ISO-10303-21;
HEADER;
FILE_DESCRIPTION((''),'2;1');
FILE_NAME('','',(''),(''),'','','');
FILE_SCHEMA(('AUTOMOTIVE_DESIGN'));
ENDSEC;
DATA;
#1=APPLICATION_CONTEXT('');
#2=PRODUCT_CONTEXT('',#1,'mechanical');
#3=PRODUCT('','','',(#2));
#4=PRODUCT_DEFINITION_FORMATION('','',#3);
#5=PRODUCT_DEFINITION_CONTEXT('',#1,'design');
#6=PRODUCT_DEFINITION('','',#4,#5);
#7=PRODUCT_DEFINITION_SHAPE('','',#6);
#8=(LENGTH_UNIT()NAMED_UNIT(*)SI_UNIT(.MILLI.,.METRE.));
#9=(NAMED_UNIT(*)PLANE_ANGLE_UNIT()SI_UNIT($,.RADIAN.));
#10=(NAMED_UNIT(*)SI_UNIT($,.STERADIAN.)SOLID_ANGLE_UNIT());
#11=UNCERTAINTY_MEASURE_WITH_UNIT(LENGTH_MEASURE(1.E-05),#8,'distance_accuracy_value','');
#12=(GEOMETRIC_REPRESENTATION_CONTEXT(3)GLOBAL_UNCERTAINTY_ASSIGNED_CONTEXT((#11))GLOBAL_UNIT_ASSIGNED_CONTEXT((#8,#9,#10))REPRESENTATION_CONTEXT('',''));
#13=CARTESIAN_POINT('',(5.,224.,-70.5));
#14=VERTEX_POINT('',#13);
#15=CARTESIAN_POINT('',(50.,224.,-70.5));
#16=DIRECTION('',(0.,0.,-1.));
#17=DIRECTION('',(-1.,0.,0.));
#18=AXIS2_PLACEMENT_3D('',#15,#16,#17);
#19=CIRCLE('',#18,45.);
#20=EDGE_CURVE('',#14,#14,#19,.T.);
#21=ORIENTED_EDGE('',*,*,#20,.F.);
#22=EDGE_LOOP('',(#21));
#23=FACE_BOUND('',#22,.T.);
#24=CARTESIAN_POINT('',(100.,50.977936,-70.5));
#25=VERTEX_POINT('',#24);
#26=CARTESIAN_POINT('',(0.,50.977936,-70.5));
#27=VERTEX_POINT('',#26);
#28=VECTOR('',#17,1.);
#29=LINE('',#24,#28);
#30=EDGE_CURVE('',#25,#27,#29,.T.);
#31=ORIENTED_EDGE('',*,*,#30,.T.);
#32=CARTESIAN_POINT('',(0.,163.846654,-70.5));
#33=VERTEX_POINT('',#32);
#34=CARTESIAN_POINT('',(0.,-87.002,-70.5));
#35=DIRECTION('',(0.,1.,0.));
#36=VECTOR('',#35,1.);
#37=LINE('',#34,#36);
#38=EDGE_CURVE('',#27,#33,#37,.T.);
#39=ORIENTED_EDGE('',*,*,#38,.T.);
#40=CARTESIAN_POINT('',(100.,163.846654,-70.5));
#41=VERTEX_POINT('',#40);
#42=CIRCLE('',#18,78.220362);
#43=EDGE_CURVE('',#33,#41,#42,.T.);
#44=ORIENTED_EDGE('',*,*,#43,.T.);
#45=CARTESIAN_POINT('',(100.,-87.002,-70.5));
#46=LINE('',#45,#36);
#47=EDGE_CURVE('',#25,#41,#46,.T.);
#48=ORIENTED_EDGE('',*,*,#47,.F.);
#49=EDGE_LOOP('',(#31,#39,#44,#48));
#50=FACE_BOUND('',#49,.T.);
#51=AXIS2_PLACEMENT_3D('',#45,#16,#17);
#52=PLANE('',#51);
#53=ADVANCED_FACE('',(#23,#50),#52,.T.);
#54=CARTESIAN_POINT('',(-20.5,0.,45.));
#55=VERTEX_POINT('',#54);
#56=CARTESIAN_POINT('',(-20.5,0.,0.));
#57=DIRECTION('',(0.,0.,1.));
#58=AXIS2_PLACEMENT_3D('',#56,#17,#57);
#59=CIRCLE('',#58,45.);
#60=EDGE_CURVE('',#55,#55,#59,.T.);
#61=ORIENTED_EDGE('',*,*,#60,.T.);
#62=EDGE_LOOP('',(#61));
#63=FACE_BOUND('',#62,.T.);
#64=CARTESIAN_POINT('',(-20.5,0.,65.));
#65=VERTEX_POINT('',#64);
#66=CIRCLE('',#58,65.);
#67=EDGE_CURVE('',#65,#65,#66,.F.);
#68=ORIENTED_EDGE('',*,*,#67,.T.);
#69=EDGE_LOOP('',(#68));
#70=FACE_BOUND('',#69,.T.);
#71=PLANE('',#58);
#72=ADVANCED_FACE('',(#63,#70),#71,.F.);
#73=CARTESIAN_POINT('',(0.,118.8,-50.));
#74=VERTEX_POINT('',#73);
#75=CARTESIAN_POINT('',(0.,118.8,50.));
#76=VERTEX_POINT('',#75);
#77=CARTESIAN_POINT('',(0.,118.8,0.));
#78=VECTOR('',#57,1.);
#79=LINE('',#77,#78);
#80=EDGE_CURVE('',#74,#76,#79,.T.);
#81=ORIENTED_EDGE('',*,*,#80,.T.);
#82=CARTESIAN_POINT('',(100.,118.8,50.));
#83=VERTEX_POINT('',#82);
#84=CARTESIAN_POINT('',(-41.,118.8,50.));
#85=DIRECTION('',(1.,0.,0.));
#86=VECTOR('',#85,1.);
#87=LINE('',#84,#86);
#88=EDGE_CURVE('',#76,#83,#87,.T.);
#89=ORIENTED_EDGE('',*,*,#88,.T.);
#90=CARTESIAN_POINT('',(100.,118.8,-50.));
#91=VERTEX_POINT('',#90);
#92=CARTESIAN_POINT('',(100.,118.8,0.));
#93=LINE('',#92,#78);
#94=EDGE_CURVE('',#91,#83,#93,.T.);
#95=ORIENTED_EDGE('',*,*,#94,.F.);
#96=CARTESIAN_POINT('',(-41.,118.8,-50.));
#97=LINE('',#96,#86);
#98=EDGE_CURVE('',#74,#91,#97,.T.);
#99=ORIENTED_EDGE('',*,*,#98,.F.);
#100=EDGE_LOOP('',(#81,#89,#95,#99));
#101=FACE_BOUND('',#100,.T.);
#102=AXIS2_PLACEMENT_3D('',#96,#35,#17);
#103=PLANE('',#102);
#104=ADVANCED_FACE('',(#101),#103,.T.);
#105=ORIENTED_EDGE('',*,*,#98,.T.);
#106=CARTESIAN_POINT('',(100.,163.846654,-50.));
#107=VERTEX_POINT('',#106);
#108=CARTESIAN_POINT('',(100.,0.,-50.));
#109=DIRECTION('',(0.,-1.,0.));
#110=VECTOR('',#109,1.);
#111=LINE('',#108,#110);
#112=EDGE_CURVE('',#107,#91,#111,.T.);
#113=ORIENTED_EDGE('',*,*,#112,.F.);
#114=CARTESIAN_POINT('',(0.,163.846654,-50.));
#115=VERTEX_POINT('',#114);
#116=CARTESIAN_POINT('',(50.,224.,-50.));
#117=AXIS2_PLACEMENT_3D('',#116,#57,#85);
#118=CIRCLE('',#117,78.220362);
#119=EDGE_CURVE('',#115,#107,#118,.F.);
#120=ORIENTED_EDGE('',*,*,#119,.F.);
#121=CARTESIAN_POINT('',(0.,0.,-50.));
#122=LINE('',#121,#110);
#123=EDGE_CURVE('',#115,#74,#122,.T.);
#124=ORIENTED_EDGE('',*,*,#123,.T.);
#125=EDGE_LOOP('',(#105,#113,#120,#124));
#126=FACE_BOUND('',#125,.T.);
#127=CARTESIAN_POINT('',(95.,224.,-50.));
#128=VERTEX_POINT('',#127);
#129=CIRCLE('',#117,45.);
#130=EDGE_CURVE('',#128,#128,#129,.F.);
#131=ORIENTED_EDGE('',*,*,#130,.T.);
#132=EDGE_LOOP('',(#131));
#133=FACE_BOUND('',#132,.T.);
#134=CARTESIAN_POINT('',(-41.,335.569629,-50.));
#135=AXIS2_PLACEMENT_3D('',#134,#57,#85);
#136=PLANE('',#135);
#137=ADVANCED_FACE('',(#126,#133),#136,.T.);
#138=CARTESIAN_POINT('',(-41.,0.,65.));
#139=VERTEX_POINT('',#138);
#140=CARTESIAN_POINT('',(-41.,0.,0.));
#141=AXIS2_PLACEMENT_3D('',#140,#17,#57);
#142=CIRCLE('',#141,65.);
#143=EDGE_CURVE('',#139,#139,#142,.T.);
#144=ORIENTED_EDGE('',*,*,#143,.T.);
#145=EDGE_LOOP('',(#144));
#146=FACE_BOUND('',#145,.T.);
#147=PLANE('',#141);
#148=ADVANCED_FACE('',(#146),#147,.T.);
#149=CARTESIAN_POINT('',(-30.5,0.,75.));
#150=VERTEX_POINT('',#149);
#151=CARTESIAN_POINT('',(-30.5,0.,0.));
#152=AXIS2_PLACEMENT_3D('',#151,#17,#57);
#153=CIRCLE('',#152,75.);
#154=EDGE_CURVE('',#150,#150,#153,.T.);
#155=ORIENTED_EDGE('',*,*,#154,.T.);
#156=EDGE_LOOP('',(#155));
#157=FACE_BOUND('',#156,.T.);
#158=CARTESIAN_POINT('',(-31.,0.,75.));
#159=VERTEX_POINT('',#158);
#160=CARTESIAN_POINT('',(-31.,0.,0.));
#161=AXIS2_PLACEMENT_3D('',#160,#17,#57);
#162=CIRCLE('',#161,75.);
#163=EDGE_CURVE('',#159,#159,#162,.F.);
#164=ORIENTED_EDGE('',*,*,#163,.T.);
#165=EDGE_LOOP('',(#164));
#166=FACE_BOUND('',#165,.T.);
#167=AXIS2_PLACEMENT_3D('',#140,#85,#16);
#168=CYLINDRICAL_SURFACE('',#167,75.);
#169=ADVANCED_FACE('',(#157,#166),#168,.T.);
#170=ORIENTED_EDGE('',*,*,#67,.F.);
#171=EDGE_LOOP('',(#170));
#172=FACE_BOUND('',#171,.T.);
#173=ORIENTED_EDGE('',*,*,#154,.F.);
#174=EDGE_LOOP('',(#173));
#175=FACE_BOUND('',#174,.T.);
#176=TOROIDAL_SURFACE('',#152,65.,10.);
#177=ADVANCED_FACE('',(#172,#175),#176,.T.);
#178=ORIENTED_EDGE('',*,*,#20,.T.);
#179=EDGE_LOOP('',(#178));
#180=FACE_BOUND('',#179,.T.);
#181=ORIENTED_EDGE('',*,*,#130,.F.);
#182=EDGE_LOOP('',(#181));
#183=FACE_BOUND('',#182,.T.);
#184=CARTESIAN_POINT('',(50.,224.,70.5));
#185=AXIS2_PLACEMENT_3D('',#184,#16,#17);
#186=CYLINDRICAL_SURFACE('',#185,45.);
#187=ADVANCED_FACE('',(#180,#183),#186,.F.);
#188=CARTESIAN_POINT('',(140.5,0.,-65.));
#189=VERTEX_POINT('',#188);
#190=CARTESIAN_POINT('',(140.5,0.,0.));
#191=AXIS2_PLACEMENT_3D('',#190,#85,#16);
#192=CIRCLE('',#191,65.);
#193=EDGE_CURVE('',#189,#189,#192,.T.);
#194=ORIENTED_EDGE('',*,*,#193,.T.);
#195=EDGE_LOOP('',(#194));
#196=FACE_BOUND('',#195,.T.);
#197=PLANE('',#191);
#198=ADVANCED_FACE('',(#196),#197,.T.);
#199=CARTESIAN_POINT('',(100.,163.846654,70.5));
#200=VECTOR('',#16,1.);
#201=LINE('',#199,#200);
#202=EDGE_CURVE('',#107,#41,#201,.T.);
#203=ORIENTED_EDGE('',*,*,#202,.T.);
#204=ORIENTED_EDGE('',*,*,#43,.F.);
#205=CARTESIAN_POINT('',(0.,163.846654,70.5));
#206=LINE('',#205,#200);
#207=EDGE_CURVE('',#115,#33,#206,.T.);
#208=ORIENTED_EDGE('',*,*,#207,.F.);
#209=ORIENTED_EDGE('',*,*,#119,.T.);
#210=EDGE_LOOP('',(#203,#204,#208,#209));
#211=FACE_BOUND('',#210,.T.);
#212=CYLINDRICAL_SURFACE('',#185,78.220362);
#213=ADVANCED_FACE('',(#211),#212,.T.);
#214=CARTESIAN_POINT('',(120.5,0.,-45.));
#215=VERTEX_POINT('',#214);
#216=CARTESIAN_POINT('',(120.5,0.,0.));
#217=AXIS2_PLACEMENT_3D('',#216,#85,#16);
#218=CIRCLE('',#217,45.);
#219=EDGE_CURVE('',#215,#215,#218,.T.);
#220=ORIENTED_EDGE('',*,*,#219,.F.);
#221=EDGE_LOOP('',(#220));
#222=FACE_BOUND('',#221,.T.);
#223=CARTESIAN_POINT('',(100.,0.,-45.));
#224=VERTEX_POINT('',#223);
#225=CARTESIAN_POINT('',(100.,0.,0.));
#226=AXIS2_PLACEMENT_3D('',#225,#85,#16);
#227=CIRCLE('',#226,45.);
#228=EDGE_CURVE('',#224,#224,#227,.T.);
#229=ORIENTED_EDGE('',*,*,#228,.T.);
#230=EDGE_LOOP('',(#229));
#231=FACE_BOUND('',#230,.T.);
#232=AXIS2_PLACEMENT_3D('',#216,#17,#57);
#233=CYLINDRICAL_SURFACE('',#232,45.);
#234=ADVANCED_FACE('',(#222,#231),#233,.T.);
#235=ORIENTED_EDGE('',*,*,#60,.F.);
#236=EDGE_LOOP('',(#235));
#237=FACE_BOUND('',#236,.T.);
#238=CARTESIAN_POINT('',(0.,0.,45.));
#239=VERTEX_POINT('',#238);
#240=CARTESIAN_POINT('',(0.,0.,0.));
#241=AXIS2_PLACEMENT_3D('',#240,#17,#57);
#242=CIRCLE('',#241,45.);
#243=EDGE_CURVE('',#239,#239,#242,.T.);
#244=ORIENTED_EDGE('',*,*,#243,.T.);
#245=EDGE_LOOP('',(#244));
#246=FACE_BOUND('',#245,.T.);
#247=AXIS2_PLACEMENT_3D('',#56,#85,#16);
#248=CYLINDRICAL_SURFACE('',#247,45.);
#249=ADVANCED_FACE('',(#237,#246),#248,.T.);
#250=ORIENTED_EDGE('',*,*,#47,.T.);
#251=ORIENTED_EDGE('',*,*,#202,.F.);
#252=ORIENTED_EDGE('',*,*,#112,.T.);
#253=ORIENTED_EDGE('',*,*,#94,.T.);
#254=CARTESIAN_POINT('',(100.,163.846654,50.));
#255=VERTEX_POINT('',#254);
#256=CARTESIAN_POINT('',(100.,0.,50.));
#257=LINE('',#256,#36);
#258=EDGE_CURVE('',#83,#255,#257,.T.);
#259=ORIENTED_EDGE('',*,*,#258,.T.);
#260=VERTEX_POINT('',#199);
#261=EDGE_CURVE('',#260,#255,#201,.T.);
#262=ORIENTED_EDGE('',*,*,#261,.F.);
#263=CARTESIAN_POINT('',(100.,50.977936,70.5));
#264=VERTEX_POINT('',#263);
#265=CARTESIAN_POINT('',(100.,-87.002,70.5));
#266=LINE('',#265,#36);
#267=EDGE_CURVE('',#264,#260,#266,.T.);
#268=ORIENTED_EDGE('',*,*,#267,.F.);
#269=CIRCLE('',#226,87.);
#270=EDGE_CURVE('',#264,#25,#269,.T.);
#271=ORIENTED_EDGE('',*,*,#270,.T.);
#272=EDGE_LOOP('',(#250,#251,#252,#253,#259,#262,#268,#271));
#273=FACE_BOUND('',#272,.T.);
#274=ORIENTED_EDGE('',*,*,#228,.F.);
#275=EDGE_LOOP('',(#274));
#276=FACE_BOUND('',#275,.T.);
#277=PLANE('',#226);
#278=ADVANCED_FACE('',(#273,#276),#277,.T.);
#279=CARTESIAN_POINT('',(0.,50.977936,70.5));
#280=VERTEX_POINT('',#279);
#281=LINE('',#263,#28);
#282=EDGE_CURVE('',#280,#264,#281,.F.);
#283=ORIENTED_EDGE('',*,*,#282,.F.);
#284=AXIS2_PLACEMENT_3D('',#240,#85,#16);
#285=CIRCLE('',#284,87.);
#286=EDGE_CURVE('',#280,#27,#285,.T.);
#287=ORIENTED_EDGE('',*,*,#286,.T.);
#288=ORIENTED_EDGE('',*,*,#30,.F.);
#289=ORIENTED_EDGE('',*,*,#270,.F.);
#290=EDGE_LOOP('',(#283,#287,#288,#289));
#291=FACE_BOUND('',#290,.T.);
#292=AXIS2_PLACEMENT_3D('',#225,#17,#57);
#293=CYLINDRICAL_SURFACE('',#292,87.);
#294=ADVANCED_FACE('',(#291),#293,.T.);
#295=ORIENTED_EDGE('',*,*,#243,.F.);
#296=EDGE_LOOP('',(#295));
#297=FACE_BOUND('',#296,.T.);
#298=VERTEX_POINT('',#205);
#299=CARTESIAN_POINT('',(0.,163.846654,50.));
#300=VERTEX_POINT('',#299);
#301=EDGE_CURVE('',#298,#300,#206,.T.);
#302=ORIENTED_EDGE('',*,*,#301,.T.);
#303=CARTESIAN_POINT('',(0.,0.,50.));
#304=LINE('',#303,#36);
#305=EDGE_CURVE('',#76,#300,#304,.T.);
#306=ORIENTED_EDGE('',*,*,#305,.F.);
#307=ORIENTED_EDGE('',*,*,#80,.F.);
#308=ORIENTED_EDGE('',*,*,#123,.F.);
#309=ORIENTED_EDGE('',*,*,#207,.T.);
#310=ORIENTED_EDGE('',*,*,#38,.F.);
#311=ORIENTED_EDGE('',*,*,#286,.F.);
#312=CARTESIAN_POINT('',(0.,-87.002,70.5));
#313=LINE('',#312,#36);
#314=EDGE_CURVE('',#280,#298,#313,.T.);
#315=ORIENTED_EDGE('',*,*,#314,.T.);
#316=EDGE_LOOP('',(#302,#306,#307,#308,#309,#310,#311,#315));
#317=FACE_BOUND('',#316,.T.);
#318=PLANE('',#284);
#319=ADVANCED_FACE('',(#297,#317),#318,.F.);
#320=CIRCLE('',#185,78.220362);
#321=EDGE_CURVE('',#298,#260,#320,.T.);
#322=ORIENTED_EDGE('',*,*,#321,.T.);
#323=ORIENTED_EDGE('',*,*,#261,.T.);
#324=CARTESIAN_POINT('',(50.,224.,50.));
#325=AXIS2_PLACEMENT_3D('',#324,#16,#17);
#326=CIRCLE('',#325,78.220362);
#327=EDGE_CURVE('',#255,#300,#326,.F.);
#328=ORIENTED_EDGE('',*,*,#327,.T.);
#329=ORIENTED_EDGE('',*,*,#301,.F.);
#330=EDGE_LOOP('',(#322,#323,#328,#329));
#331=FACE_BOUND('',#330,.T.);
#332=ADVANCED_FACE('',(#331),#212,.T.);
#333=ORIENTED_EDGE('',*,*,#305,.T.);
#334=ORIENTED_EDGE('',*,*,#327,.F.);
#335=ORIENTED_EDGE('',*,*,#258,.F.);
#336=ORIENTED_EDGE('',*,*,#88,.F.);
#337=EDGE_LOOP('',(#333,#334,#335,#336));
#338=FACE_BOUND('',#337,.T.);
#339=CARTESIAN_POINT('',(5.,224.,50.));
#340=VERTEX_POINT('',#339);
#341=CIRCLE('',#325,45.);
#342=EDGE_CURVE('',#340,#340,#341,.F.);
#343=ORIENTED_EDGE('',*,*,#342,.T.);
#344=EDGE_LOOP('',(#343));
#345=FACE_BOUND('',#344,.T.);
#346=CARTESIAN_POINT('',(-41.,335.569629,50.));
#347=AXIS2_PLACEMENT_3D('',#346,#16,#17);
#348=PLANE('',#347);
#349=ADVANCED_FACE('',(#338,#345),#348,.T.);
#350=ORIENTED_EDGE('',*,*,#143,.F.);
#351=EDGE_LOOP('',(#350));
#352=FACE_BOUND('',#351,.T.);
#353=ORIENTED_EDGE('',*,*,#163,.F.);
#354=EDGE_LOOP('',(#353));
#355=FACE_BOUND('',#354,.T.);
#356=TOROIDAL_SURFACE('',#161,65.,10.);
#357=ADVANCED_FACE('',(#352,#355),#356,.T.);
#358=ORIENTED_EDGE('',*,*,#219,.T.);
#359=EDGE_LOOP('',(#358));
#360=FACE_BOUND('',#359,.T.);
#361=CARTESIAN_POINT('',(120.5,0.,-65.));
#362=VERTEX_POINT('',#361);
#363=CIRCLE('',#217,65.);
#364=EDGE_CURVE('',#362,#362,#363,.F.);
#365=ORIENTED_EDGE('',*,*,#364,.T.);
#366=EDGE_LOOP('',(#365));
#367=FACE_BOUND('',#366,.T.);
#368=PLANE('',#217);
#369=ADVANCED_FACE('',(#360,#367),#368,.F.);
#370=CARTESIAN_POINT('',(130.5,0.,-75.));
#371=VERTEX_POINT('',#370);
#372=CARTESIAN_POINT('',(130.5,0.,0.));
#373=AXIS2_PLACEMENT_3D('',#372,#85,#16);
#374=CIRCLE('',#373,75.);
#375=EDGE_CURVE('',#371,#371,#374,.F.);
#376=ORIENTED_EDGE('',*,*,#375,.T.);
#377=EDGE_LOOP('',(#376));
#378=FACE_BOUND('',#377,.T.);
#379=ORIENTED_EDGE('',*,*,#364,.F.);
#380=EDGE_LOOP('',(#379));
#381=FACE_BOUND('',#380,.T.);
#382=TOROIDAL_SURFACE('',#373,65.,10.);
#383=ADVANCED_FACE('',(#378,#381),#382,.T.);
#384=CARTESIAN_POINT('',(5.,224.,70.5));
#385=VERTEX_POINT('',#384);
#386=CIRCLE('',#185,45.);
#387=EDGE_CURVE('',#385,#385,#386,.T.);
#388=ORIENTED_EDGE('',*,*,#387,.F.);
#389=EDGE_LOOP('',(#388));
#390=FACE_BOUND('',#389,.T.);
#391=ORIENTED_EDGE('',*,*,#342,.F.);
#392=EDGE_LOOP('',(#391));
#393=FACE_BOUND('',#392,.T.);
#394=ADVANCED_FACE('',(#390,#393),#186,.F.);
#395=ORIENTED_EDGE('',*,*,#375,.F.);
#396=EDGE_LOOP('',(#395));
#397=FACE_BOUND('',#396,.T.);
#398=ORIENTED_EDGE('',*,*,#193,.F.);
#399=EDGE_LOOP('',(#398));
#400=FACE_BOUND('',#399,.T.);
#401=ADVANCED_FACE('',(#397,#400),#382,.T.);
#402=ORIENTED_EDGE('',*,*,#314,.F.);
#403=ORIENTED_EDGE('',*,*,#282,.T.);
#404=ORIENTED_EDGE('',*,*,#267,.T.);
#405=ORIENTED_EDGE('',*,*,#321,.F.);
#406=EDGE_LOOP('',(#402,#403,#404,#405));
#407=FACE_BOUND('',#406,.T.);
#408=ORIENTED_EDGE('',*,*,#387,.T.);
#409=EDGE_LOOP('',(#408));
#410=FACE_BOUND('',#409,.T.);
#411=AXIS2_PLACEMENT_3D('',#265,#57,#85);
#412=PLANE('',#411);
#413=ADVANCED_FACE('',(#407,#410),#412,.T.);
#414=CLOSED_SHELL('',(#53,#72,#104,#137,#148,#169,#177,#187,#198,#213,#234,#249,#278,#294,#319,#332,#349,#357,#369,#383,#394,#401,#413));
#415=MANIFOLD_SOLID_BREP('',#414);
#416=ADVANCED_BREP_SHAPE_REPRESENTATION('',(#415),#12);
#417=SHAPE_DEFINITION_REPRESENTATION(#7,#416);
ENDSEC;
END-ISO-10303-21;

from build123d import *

# Parameters (mm, degrees)
SKETCH1_R                = 87
BOSS_EXTRUDE3_DEPTH      = 100
SKETCH2_R                = 45
BOSS_EXTRUDE4_DEPTH      = 20.5
SKETCH3_R                = 75
BOSS_EXTRUDE5_DEPTH      = 20
FILLET1_R                = 10
BOSS_EXTRUDE6_START      = 20.5
SKETCH4_R                = 45
BOSS_EXTRUDE6_DEPTH      = 20.5
BOSS_EXTRUDE7_START      = 20.5
SKETCH5_R                = 75
BOSS_EXTRUDE7_DEPTH      = 20.5
FILLET2_R                = 10
BOSS_EXTRUDE8_REACH      = 241.969
BOSS_EXTRUDE8_END_RADIUS = 87
SKETCH6_W                = 100
SKETCH6_H                = 141
SKETCH9_R                = 45
BOSS_EXTRUDE10_DEPTH     = 141
CUT_EXTRUDE2_DEPTH       = 367.4016204
CUT_EXTRUDE2_DEPTH_BACK  = 367.4016204
SKETCH21_W               = 216.769628827
SKETCH21_H               = 100


with BuildPart() as part:
    # Sketch1 → Boss-Extrude3 (new body)
    with BuildSketch(Plane(origin=(0, 0, 0), x_dir=(0, 0, -1), z_dir=(1, 0, 0))):
        Circle(SKETCH1_R)
    extrude(amount=BOSS_EXTRUDE3_DEPTH)

    # Sketch2 → Boss-Extrude4 (add)
    with BuildSketch(Plane(origin=(100, 0, 0), x_dir=(0, 0, -1), z_dir=(1, 0, 0))):
        Circle(SKETCH2_R)
    extrude(amount=BOSS_EXTRUDE4_DEPTH)

    # Sketch3 → Boss-Extrude5 (add)
    with BuildSketch(Plane(origin=(120.5, 0, 0), x_dir=(0, 0, -1), z_dir=(1, 0, 0))):
        Circle(SKETCH3_R)
    extrude(amount=BOSS_EXTRUDE5_DEPTH)

    # Fillet1
    fillet1_edges = [part.edges().sort_by_distance(p)[0] for p in [
        (140.5, 0, 75),
        (120.5, 0, 75),
    ]]
    fillet(fillet1_edges, radius=FILLET1_R - 0.0001)  # a hair under: the kernel refuses the full size

    # Sketch4 → Boss-Extrude6 (add)
    with BuildSketch(Plane.ZY.offset(BOSS_EXTRUDE6_START)):
        with Locations(Location((0, 0, 0), (0, 0, 180))):
            Circle(SKETCH4_R)
    extrude(amount=-BOSS_EXTRUDE6_DEPTH)

    # Sketch5 → Boss-Extrude7 (add)
    with BuildSketch(Plane.ZY.offset(20.5).offset(BOSS_EXTRUDE7_START)):
        Circle(SKETCH5_R)
    extrude(amount=-BOSS_EXTRUDE7_DEPTH)

    # Fillet2
    fillet2_edges = [part.edges().sort_by_distance(p)[0] for p in [
        (-20.5, 0, -75),
        (-41, 0, -75),
    ]]
    fillet(fillet2_edges, radius=FILLET2_R)

    # Boss-Extrude8: up to this cylinder (the profile starts outside it)
    boss_extrude8_end = Plane(origin=(50, 0, 0), z_dir=(-1, 0, 0)) * Cylinder(BOSS_EXTRUDE8_END_RADIUS, 658.938, mode=Mode.PRIVATE)
    # Sketch6 → Boss-Extrude8 (add, up to the surface)
    with BuildSketch(Plane(origin=(0, 87, 0), x_dir=(1, 0, 0), z_dir=(0, 1, 0)), mode=Mode.PRIVATE) as boss_extrude8_sk1:
        with Locations((50, 0)):
            Rectangle(SKETCH6_W, SKETCH6_H)
    boss_extrude8_tool1 = extrude(boss_extrude8_sk1.sketch, amount=-BOSS_EXTRUDE8_REACH, mode=Mode.PRIVATE) - boss_extrude8_end
    add(boss_extrude8_tool1.solids().sort_by_distance((50, 87, 0))[0])
    add(boss_extrude8_tool1.solids().sort_by_distance((50, 87, 0))[1])

    # Sketch9 → Boss-Extrude10 (add)
    with BuildSketch(Plane(origin=(0, 0, -70.5), x_dir=(-1, 0, 0), z_dir=(0, 0, -1))):
        with BuildLine():
            Line((-100, 87), (0, 87))
            Line((0, 87), (0, 163.846653629))
            ThreePointArc((0, 163.846653629), (-50, 302.220362308), (-100, 163.846653629))
            Line((-100, 163.846653629), (-100, 87))
        make_face()
        with Locations((-50, 224)):
            Circle(SKETCH9_R, mode=Mode.SUBTRACT)
    extrude(amount=-BOSS_EXTRUDE10_DEPTH)

    # Sketch21 → Cut-Extrude2 (cut, two sides: drawn at the far end of the back side and taken through both)
    with BuildSketch(Plane(origin=(147, 0, 0), x_dir=(0, 1, 0), z_dir=(-1, 0, 0)).offset(-CUT_EXTRUDE2_DEPTH_BACK)):
        with Locations((227.184814414, 0)):
            Rectangle(SKETCH21_W, SKETCH21_H)
    extrude(amount=CUT_EXTRUDE2_DEPTH + CUT_EXTRUDE2_DEPTH_BACK, mode=Mode.SUBTRACT)


solid = part.part
